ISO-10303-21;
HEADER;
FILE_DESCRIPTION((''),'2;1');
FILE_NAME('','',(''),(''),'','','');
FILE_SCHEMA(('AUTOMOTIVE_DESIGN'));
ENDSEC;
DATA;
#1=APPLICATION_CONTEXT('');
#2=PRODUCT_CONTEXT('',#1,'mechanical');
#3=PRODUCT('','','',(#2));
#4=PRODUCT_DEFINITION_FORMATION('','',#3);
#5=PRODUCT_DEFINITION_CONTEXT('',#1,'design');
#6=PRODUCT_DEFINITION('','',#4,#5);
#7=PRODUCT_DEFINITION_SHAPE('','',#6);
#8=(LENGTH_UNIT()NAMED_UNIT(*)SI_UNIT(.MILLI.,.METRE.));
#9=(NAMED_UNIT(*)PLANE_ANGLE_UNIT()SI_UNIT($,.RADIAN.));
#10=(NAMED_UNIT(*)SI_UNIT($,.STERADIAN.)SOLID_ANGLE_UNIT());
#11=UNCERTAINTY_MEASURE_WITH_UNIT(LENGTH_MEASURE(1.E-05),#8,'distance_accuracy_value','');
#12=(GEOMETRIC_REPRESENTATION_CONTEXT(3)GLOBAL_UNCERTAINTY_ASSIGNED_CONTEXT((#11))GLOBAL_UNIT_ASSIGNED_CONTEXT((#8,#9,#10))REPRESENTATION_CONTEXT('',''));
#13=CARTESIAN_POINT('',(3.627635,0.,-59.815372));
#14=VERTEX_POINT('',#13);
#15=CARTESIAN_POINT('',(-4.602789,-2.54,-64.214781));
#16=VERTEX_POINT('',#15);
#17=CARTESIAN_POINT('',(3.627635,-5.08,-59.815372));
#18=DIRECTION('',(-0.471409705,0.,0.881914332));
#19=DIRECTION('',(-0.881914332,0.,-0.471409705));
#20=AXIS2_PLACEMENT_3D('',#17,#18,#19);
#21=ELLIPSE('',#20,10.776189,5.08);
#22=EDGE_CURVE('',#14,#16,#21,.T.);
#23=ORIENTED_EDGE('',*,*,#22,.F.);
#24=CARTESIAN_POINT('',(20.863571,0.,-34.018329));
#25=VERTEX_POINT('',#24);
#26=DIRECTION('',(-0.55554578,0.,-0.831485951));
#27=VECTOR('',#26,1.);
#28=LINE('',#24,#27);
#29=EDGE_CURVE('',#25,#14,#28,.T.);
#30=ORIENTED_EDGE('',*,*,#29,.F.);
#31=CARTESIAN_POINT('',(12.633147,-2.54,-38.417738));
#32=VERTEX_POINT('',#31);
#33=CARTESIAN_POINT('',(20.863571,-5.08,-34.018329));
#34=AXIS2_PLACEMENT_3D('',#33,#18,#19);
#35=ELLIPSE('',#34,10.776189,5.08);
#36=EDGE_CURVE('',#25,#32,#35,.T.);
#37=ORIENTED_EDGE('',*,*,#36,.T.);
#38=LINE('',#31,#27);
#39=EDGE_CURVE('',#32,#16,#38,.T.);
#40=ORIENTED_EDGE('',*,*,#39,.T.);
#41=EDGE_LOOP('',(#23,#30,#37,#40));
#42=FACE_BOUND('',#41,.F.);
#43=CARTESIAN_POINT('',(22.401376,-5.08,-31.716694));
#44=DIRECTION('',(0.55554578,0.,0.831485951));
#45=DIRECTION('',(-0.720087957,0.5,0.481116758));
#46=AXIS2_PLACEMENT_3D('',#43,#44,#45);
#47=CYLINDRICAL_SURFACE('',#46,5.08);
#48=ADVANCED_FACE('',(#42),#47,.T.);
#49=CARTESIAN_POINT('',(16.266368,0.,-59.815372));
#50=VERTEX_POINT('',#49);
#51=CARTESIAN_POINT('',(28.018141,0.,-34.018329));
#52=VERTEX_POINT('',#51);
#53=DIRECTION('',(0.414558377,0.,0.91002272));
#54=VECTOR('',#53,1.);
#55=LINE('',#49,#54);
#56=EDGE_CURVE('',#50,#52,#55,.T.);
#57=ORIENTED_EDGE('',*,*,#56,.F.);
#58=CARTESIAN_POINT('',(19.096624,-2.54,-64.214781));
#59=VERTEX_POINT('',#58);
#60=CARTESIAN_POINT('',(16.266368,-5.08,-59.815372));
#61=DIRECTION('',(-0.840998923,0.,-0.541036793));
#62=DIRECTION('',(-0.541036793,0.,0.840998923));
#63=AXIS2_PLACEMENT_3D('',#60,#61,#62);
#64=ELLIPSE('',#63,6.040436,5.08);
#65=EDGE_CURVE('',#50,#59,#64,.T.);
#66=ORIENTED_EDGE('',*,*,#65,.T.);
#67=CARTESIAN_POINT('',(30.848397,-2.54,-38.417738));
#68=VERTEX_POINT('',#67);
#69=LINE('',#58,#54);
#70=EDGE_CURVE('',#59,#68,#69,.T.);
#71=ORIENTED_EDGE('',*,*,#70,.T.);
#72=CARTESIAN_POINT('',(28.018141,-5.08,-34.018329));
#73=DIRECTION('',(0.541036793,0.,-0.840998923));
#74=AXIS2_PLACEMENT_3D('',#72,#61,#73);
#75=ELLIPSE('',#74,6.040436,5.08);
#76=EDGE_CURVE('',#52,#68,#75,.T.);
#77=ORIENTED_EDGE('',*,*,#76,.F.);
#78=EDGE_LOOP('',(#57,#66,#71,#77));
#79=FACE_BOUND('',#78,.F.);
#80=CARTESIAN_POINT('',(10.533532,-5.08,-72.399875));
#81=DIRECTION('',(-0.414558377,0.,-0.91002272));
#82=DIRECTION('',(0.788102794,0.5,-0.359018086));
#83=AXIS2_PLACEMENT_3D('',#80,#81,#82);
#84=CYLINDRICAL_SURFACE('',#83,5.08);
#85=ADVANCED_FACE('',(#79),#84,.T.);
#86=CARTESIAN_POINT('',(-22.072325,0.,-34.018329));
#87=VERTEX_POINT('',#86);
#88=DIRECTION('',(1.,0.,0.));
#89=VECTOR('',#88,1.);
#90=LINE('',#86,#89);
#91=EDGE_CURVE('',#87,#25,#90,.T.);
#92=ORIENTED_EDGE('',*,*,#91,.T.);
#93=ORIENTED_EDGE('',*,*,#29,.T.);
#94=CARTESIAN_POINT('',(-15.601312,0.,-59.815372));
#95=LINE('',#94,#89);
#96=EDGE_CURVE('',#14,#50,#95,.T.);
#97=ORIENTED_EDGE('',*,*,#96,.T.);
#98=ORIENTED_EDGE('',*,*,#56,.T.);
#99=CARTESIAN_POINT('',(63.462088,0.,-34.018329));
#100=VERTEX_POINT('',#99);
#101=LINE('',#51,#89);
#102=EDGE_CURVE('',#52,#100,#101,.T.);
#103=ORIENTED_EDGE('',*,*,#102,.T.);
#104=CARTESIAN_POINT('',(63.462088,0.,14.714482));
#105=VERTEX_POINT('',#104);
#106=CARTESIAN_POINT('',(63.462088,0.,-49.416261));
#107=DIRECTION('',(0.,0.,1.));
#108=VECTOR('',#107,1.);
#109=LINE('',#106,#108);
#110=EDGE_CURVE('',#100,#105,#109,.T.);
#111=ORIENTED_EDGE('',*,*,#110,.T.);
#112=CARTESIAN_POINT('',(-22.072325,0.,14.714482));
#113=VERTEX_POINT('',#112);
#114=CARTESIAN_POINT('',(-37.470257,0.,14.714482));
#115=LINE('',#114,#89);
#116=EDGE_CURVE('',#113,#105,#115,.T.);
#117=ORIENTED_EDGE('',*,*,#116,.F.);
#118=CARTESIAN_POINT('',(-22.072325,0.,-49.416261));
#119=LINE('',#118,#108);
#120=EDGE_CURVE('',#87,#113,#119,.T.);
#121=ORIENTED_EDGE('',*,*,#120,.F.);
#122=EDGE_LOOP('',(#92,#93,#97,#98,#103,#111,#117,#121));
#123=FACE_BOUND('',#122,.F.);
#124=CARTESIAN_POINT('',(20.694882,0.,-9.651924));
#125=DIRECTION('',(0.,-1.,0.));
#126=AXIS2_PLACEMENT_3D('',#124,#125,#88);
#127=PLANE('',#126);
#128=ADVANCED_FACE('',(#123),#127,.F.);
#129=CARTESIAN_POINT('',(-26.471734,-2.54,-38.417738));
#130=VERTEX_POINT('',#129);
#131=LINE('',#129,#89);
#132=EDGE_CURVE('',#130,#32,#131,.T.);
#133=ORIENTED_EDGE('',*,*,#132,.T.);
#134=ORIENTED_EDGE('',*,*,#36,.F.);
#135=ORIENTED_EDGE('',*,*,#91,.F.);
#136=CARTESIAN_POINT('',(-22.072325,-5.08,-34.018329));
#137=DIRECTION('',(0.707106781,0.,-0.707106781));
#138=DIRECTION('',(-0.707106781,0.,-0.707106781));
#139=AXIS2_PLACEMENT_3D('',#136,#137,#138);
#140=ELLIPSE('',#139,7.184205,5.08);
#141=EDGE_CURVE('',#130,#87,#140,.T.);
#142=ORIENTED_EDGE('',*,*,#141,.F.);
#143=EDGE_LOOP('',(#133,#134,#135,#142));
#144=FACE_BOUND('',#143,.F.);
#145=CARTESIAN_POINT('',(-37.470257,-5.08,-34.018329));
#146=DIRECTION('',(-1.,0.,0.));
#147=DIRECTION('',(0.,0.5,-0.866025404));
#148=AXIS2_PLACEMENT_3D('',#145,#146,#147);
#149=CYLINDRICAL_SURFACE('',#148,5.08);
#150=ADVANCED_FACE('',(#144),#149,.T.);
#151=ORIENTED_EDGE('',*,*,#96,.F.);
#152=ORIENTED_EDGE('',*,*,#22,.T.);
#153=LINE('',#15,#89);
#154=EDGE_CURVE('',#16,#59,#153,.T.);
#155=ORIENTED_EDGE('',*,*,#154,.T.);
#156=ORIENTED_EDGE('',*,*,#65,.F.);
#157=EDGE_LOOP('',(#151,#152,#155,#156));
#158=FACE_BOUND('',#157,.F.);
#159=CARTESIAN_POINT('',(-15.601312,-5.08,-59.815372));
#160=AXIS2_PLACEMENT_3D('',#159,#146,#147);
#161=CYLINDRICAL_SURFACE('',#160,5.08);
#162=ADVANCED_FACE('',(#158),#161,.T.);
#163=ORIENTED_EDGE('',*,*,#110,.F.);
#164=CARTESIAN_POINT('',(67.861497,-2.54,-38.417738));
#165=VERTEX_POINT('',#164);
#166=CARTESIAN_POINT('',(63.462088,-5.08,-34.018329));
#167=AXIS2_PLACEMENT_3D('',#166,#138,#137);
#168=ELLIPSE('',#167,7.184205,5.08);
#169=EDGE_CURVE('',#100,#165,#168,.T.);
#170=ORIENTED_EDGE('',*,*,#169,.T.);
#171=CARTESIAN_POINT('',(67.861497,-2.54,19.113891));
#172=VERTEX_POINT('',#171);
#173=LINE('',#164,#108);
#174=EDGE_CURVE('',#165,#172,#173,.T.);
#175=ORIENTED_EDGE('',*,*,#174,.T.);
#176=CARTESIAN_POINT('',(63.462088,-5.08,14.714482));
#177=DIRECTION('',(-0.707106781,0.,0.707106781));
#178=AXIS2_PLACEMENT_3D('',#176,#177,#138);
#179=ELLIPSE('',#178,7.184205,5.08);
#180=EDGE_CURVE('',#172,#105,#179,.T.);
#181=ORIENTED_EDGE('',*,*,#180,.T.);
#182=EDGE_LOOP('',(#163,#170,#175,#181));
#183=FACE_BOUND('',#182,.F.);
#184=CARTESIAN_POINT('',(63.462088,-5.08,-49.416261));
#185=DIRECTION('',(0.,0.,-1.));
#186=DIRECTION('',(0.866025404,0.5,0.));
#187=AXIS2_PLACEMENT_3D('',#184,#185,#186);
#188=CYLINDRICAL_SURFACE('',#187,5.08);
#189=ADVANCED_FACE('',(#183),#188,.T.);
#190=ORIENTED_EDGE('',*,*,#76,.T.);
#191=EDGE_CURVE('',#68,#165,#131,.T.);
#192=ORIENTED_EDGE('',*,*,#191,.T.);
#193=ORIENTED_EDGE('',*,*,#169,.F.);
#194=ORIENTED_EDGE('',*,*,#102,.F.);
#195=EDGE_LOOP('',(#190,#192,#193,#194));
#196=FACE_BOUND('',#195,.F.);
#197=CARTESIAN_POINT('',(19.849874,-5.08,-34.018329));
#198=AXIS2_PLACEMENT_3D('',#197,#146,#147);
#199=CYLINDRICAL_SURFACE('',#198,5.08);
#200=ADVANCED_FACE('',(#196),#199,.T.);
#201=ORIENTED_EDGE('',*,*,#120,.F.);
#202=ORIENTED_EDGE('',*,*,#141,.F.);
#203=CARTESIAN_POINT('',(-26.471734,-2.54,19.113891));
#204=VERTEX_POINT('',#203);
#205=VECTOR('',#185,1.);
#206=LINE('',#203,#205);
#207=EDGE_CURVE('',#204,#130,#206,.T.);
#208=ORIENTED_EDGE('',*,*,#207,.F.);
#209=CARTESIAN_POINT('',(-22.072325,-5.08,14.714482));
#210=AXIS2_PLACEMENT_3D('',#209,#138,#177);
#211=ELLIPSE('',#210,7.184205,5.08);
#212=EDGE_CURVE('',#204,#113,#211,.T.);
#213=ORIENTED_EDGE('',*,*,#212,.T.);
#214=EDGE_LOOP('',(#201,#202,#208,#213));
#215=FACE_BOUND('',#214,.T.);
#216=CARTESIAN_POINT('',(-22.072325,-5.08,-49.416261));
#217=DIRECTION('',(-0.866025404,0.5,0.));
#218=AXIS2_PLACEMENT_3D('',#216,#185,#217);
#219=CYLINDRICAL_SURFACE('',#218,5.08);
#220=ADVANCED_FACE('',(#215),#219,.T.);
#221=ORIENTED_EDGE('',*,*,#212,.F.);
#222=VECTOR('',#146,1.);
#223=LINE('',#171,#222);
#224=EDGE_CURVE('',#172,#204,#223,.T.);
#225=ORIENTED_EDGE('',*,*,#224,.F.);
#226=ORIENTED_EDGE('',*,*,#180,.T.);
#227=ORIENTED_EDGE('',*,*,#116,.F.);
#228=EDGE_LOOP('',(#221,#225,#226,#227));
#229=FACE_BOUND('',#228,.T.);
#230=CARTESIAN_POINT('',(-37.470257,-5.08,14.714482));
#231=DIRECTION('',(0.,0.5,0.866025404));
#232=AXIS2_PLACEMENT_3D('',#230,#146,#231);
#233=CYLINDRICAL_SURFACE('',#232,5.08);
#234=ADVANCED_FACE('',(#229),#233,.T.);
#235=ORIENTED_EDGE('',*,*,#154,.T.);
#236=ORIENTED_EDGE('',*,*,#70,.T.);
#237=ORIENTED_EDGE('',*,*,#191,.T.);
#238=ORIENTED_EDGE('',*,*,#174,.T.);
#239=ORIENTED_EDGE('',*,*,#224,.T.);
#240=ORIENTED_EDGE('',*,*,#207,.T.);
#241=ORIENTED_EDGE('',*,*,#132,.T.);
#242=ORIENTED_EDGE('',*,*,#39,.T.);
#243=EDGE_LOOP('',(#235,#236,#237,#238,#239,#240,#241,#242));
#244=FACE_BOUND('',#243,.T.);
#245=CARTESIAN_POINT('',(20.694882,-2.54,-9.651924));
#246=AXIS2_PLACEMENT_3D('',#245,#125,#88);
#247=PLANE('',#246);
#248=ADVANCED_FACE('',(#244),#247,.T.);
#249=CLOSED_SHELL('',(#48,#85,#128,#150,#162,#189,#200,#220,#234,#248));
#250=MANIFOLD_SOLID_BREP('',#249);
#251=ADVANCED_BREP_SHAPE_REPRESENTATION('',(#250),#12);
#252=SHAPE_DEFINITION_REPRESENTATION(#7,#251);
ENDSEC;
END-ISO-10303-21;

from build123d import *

# Parameters (mm, degrees)
F1_DEPTH     = 2.54
F2_T1_DEPTH  = 116.3302767053
F2_T3_DEPTH  = 79.5286740138
F2_T5_DEPTH  = 45.6964583098
F2_T10_DEPTH = 61.1019260212
F2_T15_DEPTH = 53.0222754018
F2_T20_DEPTH = 50.3447363809
F2_T25_DEPTH = 59.0101457163
F2_T31_DEPTH = 50.1034033931
F2_T35_DEPTH = 53.0222754018
F2_T42_DEPTH = 50.3447363809
F2_T46_DEPTH = 48.0116230882


# Not quite as in the source:
# - a fillet or chamfer that OpenCascade refuses, or shapes differently, is made with other operations: its cross-section is extruded or revolved along the edge and cut away or added


with BuildPart() as f1:
    # F0 (on Front) → F1 (new body)
    with BuildSketch(Plane.XZ):
        Polygon((67.8614974022, 19.1138908267), (-26.4717340469, 19.1138908267), (-26.4717340469, -38.417737931), (12.6331467181, -38.417737931), (30.848396942, -38.417737931), (67.8614974022, -38.417737931), align=None)
        Polygon((30.848396942, -38.417737931), (12.6331467181, -38.417737931), (-4.6027889475, -64.2147809267), (19.0966241062, -64.2147809267), align=None)
    extrude(amount=F1_DEPTH)

    # F2: fillet of radius 5.08 on 8 edges, made by hand

    # F2_s2 → F2_t1 (cut)
    with BuildSketch(Plane.YZ.offset(-37.470256675)):
        with BuildLine():
            ThreePointArc((-2.54, 19.1138908267), (-0.6805909488, 17.2544817755), (0, 14.7144817755))
            Line((0, 14.7144817755), (0, 19.1138908267))
            Line((0, 19.1138908267), (-2.54, 19.1138908267))
        make_face()
    extrude(amount=F2_T1_DEPTH, mode=Mode.SUBTRACT)

    # F2_s4 → F2_t3 (cut)
    with BuildSketch(Plane.XY.offset(-49.4162605591)):
        with BuildLine():
            ThreePointArc((-26.4717340469, -2.54), (-24.6123249957, -0.6805909488), (-22.0723249957, 0))
            Line((-22.0723249957, 0), (-26.4717340469, 0))
            Line((-26.4717340469, 0), (-26.4717340469, -2.54))
        make_face()
        with BuildLine():
            ThreePointArc((67.8614974022, -2.54), (66.002088351, -0.6805909488), (63.462088351, 0))
            Line((63.462088351, 0), (67.8614974022, 0))
            Line((67.8614974022, 0), (67.8614974022, -2.54))
        make_face()
    extrude(amount=F2_T3_DEPTH, mode=Mode.SUBTRACT)

    # F2_s6 → F2_t5 (cut)
    with BuildSketch(Plane.YZ.offset(-15.6013115756)):
        with BuildLine():
            ThreePointArc((-2.54, -64.2147809267), (-0.6805909488, -62.3553718755), (0, -59.8153718755))
            Line((0, -59.8153718755), (0, -64.2147809267))
            Line((0, -64.2147809267), (-2.54, -64.2147809267))
        make_face()
    extrude(amount=F2_T5_DEPTH, mode=Mode.SUBTRACT)


with BuildPart() as f2_tool8:
    # F2_s9 → F2_t10 (new body)
    with BuildSketch(Plane.YZ.offset(-37.470256675)):
        with BuildLine():
            ThreePointArc((-2.54, -38.417737931), (-0.6805909488, -36.5583288798), (0, -34.0183288798))
            Line((0, -34.0183288798), (0, -38.417737931))
            Line((0, -38.417737931), (-2.54, -38.417737931))
        make_face()
    extrude(amount=F2_T10_DEPTH)

    split(bisect_by=Plane(origin=(26.480413057, 0, -17.6925198724), x_dir=(0, 1, 0), z_dir=(-0.8314859511, 0, 0.5555457795)), keep=Keep.TOP)


with BuildPart() as f1_1:
    add(f1.part)

    # F2_t7: cut F2_tool8
    add(f2_tool8.part, mode=Mode.SUBTRACT)


with BuildPart() as f2_tool13:
    # F2_s14 → F2_t15 (new body)
    with BuildSketch(Plane(origin=(-7.737083512, 0, -11.5801010106), x_dir=(0, 1, 0), z_dir=(-0.5555457795, 0, -0.8314859511))):
        with BuildLine():
            ThreePointArc((-2.54, 31.8470961801), (-0.6805909488, 33.7065052313), (0, 36.2465052313))
            Line((0, 36.2465052313), (0, 31.8470961801))
            Line((0, 31.8470961801), (-2.54, 31.8470961801))
        make_face()
    extrude(amount=F2_T15_DEPTH)

    split(bisect_by=Plane.XY.offset(-38.417737931), keep=Keep.BOTTOM)


with BuildPart() as f1_2:
    add(f1_1.part)

    # F2_t12: cut F2_tool13
    add(f2_tool13.part, mode=Mode.SUBTRACT)


with BuildPart() as f2_tool18:
    # F2_s19 → F2_t20 (new body)
    with BuildSketch(Plane(origin=(-25.5031201264, 0, -55.983475482), x_dir=(0, 1, 0), z_dir=(0.4145583774, 0, 0.9100227204))):
        with BuildLine():
            ThreePointArc((-2.54, -43.9991372067), (-0.6805909488, -42.1397281555), (0, -39.5997281555))
            Line((0, -39.5997281555), (0, -43.9991372067))
            Line((0, -43.9991372067), (-2.54, -43.9991372067))
        make_face()
    extrude(amount=F2_T20_DEPTH)

    split(bisect_by=Plane.XY.offset(-38.417737931), keep=Keep.BOTTOM)


with BuildPart() as f1_3:
    add(f1_2.part)

    # F2_t17: cut F2_tool18
    add(f2_tool18.part, mode=Mode.SUBTRACT)


with BuildPart() as f2_tool23:
    # F2_s24 → F2_t25 (new body)
    with BuildSketch(Plane.YZ.offset(19.849874314)):
        with BuildLine():
            ThreePointArc((-2.54, -38.417737931), (-0.6805909488, -36.5583288798), (0, -34.0183288798))
            Line((0, -34.0183288798), (0, -38.417737931))
            Line((0, -38.417737931), (-2.54, -38.417737931))
        make_face()
    extrude(amount=F2_T25_DEPTH)

    split(bisect_by=Plane(origin=(40.040214538, 0, -18.2402109276), x_dir=(0, 1, 0), z_dir=(0.9100227204, 0, -0.4145583774)), keep=Keep.TOP)


with BuildPart() as f1_4:
    add(f1_3.part)

    # F2_t22: cut F2_tool23
    add(f2_tool23.part, mode=Mode.SUBTRACT)


with BuildPart() as f2_tool29:
    # F2_s30 → F2_t31 (new body)
    with BuildSketch(Plane.YZ.offset(-26.4717340469)):
        with BuildLine():
            ThreePointArc((-2.54, -38.417737931), (-0.6805909488, -36.5583288798), (0, -34.0183288798))
            Line((0, -34.0183288798), (0, -38.417737931))
            Line((0, -38.417737931), (-2.54, -38.417737931))
        make_face()
    extrude(amount=F2_T31_DEPTH)

    split(bisect_by=Plane(origin=(26.480413057, 0, -17.6925198724), x_dir=(0, 1, 0), z_dir=(0.8314859511, 0, -0.5555457795)), keep=Keep.TOP)


with BuildPart() as f2_tool33:
    # F2_s34 → F2_t35 (new body)
    with BuildSketch(Plane(origin=(-7.737083512, 0, -11.5801010106), x_dir=(0, 1, 0), z_dir=(-0.5555457795, 0, -0.8314859511))):
        with BuildLine():
            ThreePointArc((-2.54, 31.8470961801), (-0.6805909488, 33.7065052313), (0, 36.2465052313))
            Line((0, 36.2465052313), (0, 31.8470961801))
            Line((0, 31.8470961801), (-2.54, 31.8470961801))
        make_face()
    extrude(amount=F2_T35_DEPTH)

    split(bisect_by=Plane.XY.offset(-38.417737931), keep=Keep.TOP)


with BuildPart() as f2_tool29_1:
    add(f2_tool29.part)

    # F2_t37: intersect F2_tool33
    add(f2_tool33.part, mode=Mode.INTERSECT)


with BuildPart() as f1_5:
    add(f1_4.part)

    # F2_t27: cut F2_tool29
    add(f2_tool29_1.part, mode=Mode.SUBTRACT)


with BuildPart() as f2_tool40:
    # F2_s41 → F2_t42 (new body)
    with BuildSketch(Plane(origin=(-25.5031201264, 0, -55.983475482), x_dir=(0, 1, 0), z_dir=(0.4145583774, 0, 0.9100227204))):
        with BuildLine():
            ThreePointArc((-2.54, -43.9991372067), (-0.6805909488, -42.1397281555), (0, -39.5997281555))
            Line((0, -39.5997281555), (0, -43.9991372067))
            Line((0, -43.9991372067), (-2.54, -43.9991372067))
        make_face()
    extrude(amount=F2_T42_DEPTH)

    split(bisect_by=Plane.XY.offset(-38.417737931), keep=Keep.TOP)


with BuildPart() as f2_tool44:
    # F2_s45 → F2_t46 (new body)
    with BuildSketch(Plane.YZ.offset(19.849874314)):
        with BuildLine():
            ThreePointArc((-2.54, -38.417737931), (-0.6805909488, -36.5583288798), (0, -34.0183288798))
            Line((0, -34.0183288798), (0, -38.417737931))
            Line((0, -38.417737931), (-2.54, -38.417737931))
        make_face()
    extrude(amount=F2_T46_DEPTH)

    split(bisect_by=Plane(origin=(40.040214538, 0, -18.2402109276), x_dir=(0, 1, 0), z_dir=(-0.9100227204, 0, 0.4145583774)), keep=Keep.TOP)


with BuildPart() as f2_tool40_1:
    add(f2_tool40.part)

    # F2_t48: intersect F2_tool44
    add(f2_tool44.part, mode=Mode.INTERSECT)


with BuildPart() as f1_6:
    add(f1_5.part)

    # F2_t38: cut F2_tool40
    add(f2_tool40_1.part, mode=Mode.SUBTRACT)


solid = f1_6.part
